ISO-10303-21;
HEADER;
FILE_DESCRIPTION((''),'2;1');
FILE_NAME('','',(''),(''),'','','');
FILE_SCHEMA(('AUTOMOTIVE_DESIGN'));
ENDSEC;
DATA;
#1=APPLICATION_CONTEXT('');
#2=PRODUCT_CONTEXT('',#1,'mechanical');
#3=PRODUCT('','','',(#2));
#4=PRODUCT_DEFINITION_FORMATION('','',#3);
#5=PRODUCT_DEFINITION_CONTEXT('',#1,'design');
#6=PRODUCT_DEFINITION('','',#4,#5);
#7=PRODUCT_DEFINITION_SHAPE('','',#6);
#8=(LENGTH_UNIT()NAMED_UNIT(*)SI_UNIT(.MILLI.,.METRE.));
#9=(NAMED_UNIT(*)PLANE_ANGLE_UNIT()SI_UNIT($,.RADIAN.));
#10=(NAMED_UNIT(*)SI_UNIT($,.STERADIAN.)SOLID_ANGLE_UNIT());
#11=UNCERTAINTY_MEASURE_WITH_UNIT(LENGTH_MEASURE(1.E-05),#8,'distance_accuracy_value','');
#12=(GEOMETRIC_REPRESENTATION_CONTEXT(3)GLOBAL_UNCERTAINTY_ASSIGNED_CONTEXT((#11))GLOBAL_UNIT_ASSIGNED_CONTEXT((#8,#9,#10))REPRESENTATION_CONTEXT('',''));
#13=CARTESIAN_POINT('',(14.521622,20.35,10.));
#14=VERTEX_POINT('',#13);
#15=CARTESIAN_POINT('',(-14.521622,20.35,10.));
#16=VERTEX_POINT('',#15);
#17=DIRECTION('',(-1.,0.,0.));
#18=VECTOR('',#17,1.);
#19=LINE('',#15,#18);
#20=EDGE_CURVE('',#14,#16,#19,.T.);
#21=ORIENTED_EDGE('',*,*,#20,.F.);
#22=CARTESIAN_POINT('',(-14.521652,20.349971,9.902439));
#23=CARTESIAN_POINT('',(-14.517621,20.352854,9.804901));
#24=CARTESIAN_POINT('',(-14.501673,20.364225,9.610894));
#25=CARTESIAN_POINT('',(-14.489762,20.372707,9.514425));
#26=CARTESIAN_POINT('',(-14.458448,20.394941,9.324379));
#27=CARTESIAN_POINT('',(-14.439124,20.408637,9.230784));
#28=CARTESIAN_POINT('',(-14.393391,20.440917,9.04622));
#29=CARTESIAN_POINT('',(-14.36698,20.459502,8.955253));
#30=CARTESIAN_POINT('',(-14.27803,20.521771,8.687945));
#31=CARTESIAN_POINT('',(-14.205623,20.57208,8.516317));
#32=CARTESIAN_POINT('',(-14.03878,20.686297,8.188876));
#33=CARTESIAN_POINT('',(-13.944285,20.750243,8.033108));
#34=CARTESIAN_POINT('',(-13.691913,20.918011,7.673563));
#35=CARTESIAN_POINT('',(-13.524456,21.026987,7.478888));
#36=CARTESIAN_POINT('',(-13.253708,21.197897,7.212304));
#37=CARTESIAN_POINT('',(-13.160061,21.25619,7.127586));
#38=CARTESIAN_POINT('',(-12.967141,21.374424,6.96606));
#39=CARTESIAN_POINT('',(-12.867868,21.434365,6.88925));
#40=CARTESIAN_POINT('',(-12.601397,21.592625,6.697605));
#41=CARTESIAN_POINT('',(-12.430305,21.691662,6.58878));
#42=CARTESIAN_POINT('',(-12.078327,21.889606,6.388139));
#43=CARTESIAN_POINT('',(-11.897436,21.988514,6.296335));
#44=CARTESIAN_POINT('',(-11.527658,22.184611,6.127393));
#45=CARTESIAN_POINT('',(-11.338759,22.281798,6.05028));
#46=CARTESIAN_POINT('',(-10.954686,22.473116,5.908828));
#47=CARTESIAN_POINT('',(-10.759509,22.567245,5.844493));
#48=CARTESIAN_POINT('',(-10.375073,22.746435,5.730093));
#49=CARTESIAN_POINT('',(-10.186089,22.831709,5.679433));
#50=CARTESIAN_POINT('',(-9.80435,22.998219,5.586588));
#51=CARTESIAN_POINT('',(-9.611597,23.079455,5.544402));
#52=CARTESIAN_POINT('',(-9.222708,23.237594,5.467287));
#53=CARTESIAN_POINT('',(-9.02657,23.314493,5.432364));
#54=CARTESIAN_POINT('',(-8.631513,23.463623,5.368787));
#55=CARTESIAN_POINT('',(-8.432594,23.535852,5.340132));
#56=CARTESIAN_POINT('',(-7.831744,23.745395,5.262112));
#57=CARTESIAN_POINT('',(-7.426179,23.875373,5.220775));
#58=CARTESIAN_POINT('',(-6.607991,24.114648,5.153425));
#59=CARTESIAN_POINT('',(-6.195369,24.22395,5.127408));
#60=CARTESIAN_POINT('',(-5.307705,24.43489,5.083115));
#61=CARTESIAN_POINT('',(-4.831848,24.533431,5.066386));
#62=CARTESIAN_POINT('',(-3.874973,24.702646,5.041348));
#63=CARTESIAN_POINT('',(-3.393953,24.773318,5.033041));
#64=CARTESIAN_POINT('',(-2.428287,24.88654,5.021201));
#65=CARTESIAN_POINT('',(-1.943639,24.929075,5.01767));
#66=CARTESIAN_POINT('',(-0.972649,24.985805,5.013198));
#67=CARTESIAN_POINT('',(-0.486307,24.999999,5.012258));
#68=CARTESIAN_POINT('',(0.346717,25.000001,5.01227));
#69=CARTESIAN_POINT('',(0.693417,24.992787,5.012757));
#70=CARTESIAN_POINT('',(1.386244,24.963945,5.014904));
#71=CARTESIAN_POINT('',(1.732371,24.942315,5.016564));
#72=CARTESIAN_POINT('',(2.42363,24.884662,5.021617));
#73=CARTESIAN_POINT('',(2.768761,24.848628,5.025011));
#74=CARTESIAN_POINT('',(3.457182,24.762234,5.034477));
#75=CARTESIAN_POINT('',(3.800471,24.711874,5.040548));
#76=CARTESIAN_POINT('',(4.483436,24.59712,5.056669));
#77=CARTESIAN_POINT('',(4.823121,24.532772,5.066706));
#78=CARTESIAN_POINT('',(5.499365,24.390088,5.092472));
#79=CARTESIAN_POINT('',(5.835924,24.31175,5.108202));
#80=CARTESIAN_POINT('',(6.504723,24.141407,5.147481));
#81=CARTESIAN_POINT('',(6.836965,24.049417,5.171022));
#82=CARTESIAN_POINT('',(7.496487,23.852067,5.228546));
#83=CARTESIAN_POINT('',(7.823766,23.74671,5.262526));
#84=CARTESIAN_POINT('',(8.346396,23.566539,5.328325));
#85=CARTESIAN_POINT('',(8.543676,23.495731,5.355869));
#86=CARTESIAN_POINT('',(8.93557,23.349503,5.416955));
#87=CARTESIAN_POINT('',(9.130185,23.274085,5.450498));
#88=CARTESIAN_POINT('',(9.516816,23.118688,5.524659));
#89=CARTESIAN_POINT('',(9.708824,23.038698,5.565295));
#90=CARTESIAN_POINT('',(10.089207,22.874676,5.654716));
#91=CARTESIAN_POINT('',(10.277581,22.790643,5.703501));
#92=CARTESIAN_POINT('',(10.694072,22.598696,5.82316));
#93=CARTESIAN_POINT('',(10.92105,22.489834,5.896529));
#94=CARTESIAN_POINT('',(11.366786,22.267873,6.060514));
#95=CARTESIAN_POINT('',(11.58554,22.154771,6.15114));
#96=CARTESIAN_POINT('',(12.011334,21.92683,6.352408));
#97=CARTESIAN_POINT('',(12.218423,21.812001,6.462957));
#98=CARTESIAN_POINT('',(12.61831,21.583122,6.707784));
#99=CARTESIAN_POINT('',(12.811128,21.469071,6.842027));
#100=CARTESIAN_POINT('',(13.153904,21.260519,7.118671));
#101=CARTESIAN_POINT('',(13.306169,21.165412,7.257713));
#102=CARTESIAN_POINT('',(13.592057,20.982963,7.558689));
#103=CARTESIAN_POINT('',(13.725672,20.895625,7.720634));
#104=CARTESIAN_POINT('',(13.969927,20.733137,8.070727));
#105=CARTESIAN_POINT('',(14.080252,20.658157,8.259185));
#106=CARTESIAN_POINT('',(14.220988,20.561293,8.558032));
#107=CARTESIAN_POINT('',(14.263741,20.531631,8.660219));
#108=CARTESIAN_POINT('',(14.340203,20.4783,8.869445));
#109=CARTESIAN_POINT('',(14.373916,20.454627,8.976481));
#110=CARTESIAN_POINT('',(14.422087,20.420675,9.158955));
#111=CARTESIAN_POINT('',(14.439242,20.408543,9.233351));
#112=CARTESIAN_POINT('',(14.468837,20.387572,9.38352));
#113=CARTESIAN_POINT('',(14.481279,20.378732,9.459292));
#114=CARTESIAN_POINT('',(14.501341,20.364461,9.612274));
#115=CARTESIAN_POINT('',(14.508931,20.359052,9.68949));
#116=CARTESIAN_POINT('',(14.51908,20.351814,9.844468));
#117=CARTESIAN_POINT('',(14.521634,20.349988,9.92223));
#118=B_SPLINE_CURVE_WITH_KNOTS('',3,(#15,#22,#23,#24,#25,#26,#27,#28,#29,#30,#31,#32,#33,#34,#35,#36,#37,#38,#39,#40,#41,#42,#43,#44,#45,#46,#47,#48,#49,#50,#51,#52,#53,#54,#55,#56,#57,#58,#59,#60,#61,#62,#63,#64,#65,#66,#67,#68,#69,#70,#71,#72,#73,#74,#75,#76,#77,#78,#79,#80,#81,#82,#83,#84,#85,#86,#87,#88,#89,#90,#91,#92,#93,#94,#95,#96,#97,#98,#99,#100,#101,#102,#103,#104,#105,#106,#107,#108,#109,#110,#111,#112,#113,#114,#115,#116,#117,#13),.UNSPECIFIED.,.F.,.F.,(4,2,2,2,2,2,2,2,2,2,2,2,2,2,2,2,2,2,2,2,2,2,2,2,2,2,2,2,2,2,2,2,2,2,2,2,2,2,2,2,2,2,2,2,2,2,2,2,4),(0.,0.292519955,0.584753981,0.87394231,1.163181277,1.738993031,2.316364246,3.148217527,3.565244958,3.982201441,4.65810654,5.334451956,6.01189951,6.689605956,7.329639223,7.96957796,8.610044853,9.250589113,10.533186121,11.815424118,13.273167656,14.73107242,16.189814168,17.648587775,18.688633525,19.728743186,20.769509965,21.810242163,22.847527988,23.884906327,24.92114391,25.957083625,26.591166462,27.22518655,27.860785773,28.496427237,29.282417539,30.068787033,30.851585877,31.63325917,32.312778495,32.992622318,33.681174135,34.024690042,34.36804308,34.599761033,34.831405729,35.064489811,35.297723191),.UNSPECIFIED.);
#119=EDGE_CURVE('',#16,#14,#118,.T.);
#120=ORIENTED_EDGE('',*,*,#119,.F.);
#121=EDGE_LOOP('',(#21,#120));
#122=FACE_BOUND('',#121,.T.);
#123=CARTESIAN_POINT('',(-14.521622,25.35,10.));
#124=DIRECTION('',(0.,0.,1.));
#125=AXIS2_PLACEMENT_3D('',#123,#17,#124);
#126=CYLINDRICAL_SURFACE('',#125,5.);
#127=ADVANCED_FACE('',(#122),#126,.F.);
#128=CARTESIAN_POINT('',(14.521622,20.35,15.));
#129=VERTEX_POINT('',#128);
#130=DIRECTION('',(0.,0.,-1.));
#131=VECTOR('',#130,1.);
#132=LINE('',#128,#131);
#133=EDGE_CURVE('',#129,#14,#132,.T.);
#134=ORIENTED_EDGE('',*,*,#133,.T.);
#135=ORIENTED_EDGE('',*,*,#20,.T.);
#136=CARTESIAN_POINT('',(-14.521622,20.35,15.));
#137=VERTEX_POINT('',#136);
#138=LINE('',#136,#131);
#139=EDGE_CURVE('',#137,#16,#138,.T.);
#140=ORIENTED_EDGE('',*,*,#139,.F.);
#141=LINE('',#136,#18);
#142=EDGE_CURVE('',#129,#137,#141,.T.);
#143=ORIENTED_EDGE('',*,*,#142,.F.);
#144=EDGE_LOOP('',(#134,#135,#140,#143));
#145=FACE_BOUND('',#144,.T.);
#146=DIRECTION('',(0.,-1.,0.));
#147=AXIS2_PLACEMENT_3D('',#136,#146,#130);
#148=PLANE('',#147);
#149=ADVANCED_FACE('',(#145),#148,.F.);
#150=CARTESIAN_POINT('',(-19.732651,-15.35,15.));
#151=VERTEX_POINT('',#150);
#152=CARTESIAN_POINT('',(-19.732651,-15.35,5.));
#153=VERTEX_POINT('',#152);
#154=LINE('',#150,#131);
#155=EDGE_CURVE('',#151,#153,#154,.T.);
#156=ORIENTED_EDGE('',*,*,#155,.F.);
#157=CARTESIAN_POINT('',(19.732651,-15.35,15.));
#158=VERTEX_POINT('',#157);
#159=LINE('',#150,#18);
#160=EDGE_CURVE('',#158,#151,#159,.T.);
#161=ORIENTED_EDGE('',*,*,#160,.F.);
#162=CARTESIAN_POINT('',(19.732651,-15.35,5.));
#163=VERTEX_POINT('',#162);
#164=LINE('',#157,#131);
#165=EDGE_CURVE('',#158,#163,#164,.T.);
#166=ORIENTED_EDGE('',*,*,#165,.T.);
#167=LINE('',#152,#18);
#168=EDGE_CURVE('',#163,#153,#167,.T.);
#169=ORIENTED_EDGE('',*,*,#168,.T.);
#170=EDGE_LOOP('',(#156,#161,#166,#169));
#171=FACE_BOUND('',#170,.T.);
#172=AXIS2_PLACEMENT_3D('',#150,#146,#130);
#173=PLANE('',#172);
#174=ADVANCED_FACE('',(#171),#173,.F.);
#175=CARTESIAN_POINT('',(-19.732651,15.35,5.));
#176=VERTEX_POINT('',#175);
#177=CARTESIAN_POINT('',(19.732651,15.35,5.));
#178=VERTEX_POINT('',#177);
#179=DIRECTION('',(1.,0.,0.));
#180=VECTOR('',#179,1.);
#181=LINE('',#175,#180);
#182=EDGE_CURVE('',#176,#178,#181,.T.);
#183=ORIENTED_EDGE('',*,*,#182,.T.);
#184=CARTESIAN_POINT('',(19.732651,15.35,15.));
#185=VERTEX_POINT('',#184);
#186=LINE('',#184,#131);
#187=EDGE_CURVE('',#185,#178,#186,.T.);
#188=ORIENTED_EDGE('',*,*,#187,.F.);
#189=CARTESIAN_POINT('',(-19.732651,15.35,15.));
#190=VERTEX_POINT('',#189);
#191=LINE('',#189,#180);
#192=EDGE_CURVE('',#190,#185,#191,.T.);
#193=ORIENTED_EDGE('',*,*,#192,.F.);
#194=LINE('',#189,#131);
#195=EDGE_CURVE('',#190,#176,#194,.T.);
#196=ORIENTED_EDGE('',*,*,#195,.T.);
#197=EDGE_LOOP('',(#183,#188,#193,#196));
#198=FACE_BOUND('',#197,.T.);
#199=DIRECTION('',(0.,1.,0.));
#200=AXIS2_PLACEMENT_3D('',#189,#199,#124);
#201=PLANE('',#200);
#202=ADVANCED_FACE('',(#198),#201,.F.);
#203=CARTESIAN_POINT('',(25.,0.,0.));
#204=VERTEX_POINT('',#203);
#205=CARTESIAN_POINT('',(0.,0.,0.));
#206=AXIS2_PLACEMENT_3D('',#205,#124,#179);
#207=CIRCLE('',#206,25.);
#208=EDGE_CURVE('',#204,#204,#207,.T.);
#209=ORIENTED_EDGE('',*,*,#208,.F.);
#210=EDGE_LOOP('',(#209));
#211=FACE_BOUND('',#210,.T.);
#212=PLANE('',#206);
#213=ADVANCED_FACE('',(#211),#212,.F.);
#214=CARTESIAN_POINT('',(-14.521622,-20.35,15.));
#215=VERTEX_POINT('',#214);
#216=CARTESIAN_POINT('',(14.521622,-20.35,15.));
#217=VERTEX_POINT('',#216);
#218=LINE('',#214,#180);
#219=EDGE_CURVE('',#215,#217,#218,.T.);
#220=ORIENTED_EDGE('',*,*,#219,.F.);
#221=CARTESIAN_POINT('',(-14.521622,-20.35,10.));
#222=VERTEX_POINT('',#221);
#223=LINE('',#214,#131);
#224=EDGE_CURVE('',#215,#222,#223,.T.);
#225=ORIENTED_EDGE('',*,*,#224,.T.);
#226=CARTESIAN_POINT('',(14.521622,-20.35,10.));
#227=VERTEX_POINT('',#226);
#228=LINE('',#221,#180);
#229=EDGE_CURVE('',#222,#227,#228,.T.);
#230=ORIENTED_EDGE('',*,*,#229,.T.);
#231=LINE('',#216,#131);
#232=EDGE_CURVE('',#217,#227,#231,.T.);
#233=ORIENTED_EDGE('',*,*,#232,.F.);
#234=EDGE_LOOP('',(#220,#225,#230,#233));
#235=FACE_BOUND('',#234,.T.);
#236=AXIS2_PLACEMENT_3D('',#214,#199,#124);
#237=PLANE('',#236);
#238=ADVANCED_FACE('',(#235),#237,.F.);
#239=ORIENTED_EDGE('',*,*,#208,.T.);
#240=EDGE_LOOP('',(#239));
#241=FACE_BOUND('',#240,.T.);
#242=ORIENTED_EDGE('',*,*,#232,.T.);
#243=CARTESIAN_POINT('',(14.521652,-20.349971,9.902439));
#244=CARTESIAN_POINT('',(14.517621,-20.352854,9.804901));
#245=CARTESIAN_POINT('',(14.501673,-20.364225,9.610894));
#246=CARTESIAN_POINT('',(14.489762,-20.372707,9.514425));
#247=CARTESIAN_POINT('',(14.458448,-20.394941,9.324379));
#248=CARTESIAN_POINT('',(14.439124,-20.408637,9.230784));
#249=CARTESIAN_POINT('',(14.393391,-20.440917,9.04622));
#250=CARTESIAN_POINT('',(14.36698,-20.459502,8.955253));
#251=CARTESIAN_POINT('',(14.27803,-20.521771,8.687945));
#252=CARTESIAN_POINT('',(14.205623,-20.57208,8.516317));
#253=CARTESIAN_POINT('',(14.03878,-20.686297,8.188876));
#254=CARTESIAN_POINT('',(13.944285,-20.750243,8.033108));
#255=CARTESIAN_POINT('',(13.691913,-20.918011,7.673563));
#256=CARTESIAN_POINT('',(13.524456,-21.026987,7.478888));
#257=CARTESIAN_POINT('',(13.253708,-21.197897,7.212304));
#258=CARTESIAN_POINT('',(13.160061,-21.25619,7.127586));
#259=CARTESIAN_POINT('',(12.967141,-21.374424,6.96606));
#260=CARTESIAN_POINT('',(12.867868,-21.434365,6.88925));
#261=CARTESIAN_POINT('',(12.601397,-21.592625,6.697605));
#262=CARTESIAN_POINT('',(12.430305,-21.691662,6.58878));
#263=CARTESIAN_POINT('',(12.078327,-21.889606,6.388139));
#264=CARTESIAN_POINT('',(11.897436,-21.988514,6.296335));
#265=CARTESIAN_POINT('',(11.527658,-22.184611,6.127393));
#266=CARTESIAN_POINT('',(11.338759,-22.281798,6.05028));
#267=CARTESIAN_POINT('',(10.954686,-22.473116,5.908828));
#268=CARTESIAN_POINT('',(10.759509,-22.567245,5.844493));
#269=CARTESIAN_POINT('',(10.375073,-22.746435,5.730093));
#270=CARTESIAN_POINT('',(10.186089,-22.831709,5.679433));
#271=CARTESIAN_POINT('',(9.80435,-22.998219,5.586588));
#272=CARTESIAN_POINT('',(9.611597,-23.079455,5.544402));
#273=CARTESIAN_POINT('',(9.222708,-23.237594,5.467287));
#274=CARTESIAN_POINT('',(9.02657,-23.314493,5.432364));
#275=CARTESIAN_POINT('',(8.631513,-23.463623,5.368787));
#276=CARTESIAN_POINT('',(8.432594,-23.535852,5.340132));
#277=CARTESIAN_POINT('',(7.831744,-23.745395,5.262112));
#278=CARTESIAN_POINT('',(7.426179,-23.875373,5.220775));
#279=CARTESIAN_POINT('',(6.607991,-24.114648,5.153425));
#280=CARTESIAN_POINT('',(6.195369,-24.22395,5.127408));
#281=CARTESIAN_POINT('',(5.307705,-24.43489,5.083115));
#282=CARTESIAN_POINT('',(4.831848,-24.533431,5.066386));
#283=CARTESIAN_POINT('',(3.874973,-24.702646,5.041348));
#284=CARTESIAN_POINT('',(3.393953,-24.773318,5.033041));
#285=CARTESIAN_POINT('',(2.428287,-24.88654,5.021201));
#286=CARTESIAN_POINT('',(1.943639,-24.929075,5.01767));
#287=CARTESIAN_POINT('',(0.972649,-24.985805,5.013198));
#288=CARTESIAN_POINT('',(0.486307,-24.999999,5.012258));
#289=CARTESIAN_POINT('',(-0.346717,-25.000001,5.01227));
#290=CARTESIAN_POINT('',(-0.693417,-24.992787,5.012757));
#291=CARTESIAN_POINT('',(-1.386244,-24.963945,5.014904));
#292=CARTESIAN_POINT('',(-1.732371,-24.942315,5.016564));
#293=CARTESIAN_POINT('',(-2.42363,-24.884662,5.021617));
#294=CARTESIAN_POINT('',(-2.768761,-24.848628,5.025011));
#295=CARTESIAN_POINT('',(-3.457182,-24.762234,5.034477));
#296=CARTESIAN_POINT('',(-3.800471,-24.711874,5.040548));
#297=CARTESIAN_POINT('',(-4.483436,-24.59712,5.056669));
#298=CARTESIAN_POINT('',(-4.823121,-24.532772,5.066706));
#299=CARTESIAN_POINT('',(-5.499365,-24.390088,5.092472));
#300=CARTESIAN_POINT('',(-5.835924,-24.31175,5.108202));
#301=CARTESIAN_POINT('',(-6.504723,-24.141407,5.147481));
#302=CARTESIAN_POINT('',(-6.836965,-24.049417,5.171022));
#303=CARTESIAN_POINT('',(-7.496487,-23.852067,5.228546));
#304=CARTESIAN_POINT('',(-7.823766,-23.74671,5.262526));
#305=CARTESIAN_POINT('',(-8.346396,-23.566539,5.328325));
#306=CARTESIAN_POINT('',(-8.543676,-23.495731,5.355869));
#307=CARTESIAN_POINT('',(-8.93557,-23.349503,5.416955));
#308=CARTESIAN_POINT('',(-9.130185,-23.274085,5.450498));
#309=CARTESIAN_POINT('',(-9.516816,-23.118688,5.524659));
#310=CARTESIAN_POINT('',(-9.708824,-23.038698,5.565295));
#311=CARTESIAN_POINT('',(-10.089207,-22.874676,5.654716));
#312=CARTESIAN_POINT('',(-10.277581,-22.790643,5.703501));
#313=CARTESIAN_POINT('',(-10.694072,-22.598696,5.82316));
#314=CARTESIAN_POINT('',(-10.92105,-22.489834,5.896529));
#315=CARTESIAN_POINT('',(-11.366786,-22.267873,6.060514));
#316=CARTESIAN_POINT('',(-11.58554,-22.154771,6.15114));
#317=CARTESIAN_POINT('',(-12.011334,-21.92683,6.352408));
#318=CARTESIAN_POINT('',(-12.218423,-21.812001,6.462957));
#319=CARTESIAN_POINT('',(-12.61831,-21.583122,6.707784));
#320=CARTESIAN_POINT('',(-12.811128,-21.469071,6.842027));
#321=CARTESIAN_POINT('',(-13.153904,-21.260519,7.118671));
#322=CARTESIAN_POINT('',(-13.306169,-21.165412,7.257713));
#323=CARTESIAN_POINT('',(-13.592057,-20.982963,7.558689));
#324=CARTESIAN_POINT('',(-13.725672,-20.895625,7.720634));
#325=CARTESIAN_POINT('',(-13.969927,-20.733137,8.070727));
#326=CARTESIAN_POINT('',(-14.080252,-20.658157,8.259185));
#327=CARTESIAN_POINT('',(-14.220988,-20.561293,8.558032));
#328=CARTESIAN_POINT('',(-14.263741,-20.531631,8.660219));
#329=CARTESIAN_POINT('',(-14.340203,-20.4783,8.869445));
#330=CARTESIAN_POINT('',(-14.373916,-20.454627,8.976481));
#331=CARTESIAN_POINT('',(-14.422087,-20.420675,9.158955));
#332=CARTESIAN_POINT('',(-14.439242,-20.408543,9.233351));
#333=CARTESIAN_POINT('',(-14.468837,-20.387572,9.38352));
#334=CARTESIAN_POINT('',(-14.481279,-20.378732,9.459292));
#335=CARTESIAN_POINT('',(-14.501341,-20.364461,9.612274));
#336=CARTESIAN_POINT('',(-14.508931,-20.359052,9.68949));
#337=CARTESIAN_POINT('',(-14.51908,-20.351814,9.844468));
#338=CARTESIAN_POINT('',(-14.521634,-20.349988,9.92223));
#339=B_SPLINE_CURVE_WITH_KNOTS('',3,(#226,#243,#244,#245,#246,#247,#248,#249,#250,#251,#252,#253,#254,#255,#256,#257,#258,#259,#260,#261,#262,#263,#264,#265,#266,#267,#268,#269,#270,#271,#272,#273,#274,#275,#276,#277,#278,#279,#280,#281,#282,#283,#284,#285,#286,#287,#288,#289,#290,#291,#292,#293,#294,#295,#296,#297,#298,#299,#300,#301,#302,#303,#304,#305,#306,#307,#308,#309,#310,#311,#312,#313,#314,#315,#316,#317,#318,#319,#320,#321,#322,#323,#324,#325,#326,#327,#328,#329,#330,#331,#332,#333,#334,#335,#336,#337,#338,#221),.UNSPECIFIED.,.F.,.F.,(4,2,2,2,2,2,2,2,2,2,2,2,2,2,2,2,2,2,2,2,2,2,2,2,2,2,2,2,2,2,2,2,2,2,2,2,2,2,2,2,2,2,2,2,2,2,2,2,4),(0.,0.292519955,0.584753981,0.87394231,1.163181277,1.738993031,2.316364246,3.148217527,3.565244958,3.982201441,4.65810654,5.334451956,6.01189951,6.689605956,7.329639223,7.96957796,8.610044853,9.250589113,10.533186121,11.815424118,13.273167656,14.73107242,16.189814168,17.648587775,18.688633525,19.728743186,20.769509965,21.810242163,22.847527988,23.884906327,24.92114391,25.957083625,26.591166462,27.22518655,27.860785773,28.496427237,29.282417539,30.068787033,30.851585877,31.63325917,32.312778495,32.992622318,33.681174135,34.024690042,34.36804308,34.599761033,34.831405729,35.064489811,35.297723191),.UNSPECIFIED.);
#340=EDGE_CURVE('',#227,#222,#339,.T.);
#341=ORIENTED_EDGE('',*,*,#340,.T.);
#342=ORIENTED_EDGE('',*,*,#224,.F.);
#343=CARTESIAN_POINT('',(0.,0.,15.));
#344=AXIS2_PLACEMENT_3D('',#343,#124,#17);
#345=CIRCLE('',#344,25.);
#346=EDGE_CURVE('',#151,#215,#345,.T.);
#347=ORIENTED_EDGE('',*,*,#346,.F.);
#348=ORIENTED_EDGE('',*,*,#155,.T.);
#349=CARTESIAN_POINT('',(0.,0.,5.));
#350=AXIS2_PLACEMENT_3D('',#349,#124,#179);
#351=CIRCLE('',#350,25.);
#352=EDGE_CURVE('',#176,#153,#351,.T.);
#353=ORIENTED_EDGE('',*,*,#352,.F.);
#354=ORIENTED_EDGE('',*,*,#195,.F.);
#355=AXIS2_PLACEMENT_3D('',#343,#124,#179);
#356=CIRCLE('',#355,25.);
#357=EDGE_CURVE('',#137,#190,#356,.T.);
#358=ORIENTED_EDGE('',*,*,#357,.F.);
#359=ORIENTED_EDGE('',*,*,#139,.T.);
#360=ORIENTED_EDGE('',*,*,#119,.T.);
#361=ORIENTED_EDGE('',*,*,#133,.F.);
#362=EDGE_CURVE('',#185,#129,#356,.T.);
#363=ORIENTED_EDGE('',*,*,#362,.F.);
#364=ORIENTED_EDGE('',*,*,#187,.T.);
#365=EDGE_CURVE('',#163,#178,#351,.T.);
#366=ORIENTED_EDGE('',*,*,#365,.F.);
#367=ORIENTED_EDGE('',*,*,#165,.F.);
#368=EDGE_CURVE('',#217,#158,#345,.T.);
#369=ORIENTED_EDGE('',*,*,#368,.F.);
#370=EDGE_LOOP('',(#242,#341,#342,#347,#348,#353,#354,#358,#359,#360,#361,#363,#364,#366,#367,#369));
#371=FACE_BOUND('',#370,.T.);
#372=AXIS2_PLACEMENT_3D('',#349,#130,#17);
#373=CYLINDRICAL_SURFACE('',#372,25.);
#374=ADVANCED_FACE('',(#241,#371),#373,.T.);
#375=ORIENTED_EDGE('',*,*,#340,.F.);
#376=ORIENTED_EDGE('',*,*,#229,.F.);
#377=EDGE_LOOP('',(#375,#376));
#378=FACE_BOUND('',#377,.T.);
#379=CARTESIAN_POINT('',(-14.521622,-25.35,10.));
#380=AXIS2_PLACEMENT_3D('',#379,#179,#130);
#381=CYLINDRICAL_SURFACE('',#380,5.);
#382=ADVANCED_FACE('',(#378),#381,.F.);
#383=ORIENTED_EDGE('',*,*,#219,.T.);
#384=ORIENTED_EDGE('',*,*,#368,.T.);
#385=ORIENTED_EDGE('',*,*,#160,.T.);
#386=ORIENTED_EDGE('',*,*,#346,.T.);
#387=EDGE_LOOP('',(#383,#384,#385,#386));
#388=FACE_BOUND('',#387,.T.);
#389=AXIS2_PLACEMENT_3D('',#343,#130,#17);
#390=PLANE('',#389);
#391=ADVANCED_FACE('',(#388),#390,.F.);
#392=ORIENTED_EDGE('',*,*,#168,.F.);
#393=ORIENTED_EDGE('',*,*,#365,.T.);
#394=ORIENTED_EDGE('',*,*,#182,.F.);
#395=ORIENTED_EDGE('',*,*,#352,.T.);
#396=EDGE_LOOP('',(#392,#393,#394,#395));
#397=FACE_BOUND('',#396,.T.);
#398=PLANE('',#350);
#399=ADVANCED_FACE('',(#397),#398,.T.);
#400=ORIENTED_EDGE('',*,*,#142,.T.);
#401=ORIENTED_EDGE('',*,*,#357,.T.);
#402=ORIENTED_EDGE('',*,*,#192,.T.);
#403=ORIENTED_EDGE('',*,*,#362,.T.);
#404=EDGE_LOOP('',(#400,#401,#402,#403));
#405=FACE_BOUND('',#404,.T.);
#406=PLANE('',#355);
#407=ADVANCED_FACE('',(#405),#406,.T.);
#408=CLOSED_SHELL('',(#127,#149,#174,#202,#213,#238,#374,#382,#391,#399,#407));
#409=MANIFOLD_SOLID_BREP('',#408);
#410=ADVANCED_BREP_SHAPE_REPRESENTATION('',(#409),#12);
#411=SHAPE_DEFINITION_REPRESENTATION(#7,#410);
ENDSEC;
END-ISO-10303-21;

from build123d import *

# Parameters (mm, degrees)
ESQUISSE1_R        = 25
BOSS_EXTRU_1_DEPTH = 5
BOSS_EXTRU_2_DEPTH = 10
CONG_2_R           = 5


with BuildPart() as part:
    # Esquisse1 → Boss.-Extru.1 (new body)
    with BuildSketch(Plane.XY):
        Circle(ESQUISSE1_R)
    extrude(amount=BOSS_EXTRU_1_DEPTH)

    # Esquisse2 → Boss.-Extru.2 (add)
    with BuildSketch(Plane.XY.offset(5)):
        with BuildLine():
            Line((-19.732650608, 15.35), (19.732650608, 15.35))
            ThreePointArc((19.732650608, 15.35), (17.308633531, 18.039157555), (14.52162181, 20.35))
            Line((14.52162181, 20.35), (-14.52162181, 20.35))
            ThreePointArc((-14.52162181, 20.35), (-17.308633531, 18.039157555), (-19.732650608, 15.35))
        make_face()
        with BuildLine():
            Line((-14.52162181, -20.35), (14.52162181, -20.35))
            ThreePointArc((14.52162181, -20.35), (17.308633531, -18.039157555), (19.732650608, -15.35))
            Line((19.732650608, -15.35), (-19.732650608, -15.35))
            ThreePointArc((-19.732650608, -15.35), (-17.308633531, -18.039157555), (-14.52162181, -20.35))
        make_face()
    extrude(amount=BOSS_EXTRU_2_DEPTH)

    # Congé2
    # the kernel refuses this fillet: 5 mm, written as the material it adds along each edge
    with BuildSketch(Plane(origin=(27.02162181, 20.35, 5), x_dir=(0, 1, 0), z_dir=(-1, 0, 0))) as cong_2_piece_1_section:
        with BuildLine():
            CenterArc((CONG_2_R, -CONG_2_R), CONG_2_R, 90, 90)
            Line((0, -CONG_2_R), (0, 0))
            Line((0, 0), (CONG_2_R, 0))
        make_face()
    cong_2_piece_1 = extrude(amount=54.043243621, mode=Mode.PRIVATE)
    cong_2_piece_1 = cong_2_piece_1 & Plane(origin=(0, 0, 6.238001242), x_dir=(1, 0, 0), z_dir=(0, 0, -1)) * Cylinder(25, 129, mode=Mode.PRIVATE)
    add(cong_2_piece_1)
    with BuildSketch(Plane(origin=(-27.02162181, -20.35, 5), x_dir=(0, -1, 0), z_dir=(1, 0, 0))) as cong_2_piece_2_section:
        with BuildLine():
            CenterArc((CONG_2_R, -CONG_2_R), CONG_2_R, 90, 90)
            Line((0, -CONG_2_R), (0, 0))
            Line((0, 0), (CONG_2_R, 0))
        make_face()
    cong_2_piece_2 = extrude(amount=54.043243621, mode=Mode.PRIVATE)
    cong_2_piece_2 = cong_2_piece_2 & Plane(origin=(0, 0, 6.238012691), x_dir=(1, 0, 0), z_dir=(0, 0, -1)) * Cylinder(25, 129, mode=Mode.PRIVATE)
    add(cong_2_piece_2)


solid = part.part
